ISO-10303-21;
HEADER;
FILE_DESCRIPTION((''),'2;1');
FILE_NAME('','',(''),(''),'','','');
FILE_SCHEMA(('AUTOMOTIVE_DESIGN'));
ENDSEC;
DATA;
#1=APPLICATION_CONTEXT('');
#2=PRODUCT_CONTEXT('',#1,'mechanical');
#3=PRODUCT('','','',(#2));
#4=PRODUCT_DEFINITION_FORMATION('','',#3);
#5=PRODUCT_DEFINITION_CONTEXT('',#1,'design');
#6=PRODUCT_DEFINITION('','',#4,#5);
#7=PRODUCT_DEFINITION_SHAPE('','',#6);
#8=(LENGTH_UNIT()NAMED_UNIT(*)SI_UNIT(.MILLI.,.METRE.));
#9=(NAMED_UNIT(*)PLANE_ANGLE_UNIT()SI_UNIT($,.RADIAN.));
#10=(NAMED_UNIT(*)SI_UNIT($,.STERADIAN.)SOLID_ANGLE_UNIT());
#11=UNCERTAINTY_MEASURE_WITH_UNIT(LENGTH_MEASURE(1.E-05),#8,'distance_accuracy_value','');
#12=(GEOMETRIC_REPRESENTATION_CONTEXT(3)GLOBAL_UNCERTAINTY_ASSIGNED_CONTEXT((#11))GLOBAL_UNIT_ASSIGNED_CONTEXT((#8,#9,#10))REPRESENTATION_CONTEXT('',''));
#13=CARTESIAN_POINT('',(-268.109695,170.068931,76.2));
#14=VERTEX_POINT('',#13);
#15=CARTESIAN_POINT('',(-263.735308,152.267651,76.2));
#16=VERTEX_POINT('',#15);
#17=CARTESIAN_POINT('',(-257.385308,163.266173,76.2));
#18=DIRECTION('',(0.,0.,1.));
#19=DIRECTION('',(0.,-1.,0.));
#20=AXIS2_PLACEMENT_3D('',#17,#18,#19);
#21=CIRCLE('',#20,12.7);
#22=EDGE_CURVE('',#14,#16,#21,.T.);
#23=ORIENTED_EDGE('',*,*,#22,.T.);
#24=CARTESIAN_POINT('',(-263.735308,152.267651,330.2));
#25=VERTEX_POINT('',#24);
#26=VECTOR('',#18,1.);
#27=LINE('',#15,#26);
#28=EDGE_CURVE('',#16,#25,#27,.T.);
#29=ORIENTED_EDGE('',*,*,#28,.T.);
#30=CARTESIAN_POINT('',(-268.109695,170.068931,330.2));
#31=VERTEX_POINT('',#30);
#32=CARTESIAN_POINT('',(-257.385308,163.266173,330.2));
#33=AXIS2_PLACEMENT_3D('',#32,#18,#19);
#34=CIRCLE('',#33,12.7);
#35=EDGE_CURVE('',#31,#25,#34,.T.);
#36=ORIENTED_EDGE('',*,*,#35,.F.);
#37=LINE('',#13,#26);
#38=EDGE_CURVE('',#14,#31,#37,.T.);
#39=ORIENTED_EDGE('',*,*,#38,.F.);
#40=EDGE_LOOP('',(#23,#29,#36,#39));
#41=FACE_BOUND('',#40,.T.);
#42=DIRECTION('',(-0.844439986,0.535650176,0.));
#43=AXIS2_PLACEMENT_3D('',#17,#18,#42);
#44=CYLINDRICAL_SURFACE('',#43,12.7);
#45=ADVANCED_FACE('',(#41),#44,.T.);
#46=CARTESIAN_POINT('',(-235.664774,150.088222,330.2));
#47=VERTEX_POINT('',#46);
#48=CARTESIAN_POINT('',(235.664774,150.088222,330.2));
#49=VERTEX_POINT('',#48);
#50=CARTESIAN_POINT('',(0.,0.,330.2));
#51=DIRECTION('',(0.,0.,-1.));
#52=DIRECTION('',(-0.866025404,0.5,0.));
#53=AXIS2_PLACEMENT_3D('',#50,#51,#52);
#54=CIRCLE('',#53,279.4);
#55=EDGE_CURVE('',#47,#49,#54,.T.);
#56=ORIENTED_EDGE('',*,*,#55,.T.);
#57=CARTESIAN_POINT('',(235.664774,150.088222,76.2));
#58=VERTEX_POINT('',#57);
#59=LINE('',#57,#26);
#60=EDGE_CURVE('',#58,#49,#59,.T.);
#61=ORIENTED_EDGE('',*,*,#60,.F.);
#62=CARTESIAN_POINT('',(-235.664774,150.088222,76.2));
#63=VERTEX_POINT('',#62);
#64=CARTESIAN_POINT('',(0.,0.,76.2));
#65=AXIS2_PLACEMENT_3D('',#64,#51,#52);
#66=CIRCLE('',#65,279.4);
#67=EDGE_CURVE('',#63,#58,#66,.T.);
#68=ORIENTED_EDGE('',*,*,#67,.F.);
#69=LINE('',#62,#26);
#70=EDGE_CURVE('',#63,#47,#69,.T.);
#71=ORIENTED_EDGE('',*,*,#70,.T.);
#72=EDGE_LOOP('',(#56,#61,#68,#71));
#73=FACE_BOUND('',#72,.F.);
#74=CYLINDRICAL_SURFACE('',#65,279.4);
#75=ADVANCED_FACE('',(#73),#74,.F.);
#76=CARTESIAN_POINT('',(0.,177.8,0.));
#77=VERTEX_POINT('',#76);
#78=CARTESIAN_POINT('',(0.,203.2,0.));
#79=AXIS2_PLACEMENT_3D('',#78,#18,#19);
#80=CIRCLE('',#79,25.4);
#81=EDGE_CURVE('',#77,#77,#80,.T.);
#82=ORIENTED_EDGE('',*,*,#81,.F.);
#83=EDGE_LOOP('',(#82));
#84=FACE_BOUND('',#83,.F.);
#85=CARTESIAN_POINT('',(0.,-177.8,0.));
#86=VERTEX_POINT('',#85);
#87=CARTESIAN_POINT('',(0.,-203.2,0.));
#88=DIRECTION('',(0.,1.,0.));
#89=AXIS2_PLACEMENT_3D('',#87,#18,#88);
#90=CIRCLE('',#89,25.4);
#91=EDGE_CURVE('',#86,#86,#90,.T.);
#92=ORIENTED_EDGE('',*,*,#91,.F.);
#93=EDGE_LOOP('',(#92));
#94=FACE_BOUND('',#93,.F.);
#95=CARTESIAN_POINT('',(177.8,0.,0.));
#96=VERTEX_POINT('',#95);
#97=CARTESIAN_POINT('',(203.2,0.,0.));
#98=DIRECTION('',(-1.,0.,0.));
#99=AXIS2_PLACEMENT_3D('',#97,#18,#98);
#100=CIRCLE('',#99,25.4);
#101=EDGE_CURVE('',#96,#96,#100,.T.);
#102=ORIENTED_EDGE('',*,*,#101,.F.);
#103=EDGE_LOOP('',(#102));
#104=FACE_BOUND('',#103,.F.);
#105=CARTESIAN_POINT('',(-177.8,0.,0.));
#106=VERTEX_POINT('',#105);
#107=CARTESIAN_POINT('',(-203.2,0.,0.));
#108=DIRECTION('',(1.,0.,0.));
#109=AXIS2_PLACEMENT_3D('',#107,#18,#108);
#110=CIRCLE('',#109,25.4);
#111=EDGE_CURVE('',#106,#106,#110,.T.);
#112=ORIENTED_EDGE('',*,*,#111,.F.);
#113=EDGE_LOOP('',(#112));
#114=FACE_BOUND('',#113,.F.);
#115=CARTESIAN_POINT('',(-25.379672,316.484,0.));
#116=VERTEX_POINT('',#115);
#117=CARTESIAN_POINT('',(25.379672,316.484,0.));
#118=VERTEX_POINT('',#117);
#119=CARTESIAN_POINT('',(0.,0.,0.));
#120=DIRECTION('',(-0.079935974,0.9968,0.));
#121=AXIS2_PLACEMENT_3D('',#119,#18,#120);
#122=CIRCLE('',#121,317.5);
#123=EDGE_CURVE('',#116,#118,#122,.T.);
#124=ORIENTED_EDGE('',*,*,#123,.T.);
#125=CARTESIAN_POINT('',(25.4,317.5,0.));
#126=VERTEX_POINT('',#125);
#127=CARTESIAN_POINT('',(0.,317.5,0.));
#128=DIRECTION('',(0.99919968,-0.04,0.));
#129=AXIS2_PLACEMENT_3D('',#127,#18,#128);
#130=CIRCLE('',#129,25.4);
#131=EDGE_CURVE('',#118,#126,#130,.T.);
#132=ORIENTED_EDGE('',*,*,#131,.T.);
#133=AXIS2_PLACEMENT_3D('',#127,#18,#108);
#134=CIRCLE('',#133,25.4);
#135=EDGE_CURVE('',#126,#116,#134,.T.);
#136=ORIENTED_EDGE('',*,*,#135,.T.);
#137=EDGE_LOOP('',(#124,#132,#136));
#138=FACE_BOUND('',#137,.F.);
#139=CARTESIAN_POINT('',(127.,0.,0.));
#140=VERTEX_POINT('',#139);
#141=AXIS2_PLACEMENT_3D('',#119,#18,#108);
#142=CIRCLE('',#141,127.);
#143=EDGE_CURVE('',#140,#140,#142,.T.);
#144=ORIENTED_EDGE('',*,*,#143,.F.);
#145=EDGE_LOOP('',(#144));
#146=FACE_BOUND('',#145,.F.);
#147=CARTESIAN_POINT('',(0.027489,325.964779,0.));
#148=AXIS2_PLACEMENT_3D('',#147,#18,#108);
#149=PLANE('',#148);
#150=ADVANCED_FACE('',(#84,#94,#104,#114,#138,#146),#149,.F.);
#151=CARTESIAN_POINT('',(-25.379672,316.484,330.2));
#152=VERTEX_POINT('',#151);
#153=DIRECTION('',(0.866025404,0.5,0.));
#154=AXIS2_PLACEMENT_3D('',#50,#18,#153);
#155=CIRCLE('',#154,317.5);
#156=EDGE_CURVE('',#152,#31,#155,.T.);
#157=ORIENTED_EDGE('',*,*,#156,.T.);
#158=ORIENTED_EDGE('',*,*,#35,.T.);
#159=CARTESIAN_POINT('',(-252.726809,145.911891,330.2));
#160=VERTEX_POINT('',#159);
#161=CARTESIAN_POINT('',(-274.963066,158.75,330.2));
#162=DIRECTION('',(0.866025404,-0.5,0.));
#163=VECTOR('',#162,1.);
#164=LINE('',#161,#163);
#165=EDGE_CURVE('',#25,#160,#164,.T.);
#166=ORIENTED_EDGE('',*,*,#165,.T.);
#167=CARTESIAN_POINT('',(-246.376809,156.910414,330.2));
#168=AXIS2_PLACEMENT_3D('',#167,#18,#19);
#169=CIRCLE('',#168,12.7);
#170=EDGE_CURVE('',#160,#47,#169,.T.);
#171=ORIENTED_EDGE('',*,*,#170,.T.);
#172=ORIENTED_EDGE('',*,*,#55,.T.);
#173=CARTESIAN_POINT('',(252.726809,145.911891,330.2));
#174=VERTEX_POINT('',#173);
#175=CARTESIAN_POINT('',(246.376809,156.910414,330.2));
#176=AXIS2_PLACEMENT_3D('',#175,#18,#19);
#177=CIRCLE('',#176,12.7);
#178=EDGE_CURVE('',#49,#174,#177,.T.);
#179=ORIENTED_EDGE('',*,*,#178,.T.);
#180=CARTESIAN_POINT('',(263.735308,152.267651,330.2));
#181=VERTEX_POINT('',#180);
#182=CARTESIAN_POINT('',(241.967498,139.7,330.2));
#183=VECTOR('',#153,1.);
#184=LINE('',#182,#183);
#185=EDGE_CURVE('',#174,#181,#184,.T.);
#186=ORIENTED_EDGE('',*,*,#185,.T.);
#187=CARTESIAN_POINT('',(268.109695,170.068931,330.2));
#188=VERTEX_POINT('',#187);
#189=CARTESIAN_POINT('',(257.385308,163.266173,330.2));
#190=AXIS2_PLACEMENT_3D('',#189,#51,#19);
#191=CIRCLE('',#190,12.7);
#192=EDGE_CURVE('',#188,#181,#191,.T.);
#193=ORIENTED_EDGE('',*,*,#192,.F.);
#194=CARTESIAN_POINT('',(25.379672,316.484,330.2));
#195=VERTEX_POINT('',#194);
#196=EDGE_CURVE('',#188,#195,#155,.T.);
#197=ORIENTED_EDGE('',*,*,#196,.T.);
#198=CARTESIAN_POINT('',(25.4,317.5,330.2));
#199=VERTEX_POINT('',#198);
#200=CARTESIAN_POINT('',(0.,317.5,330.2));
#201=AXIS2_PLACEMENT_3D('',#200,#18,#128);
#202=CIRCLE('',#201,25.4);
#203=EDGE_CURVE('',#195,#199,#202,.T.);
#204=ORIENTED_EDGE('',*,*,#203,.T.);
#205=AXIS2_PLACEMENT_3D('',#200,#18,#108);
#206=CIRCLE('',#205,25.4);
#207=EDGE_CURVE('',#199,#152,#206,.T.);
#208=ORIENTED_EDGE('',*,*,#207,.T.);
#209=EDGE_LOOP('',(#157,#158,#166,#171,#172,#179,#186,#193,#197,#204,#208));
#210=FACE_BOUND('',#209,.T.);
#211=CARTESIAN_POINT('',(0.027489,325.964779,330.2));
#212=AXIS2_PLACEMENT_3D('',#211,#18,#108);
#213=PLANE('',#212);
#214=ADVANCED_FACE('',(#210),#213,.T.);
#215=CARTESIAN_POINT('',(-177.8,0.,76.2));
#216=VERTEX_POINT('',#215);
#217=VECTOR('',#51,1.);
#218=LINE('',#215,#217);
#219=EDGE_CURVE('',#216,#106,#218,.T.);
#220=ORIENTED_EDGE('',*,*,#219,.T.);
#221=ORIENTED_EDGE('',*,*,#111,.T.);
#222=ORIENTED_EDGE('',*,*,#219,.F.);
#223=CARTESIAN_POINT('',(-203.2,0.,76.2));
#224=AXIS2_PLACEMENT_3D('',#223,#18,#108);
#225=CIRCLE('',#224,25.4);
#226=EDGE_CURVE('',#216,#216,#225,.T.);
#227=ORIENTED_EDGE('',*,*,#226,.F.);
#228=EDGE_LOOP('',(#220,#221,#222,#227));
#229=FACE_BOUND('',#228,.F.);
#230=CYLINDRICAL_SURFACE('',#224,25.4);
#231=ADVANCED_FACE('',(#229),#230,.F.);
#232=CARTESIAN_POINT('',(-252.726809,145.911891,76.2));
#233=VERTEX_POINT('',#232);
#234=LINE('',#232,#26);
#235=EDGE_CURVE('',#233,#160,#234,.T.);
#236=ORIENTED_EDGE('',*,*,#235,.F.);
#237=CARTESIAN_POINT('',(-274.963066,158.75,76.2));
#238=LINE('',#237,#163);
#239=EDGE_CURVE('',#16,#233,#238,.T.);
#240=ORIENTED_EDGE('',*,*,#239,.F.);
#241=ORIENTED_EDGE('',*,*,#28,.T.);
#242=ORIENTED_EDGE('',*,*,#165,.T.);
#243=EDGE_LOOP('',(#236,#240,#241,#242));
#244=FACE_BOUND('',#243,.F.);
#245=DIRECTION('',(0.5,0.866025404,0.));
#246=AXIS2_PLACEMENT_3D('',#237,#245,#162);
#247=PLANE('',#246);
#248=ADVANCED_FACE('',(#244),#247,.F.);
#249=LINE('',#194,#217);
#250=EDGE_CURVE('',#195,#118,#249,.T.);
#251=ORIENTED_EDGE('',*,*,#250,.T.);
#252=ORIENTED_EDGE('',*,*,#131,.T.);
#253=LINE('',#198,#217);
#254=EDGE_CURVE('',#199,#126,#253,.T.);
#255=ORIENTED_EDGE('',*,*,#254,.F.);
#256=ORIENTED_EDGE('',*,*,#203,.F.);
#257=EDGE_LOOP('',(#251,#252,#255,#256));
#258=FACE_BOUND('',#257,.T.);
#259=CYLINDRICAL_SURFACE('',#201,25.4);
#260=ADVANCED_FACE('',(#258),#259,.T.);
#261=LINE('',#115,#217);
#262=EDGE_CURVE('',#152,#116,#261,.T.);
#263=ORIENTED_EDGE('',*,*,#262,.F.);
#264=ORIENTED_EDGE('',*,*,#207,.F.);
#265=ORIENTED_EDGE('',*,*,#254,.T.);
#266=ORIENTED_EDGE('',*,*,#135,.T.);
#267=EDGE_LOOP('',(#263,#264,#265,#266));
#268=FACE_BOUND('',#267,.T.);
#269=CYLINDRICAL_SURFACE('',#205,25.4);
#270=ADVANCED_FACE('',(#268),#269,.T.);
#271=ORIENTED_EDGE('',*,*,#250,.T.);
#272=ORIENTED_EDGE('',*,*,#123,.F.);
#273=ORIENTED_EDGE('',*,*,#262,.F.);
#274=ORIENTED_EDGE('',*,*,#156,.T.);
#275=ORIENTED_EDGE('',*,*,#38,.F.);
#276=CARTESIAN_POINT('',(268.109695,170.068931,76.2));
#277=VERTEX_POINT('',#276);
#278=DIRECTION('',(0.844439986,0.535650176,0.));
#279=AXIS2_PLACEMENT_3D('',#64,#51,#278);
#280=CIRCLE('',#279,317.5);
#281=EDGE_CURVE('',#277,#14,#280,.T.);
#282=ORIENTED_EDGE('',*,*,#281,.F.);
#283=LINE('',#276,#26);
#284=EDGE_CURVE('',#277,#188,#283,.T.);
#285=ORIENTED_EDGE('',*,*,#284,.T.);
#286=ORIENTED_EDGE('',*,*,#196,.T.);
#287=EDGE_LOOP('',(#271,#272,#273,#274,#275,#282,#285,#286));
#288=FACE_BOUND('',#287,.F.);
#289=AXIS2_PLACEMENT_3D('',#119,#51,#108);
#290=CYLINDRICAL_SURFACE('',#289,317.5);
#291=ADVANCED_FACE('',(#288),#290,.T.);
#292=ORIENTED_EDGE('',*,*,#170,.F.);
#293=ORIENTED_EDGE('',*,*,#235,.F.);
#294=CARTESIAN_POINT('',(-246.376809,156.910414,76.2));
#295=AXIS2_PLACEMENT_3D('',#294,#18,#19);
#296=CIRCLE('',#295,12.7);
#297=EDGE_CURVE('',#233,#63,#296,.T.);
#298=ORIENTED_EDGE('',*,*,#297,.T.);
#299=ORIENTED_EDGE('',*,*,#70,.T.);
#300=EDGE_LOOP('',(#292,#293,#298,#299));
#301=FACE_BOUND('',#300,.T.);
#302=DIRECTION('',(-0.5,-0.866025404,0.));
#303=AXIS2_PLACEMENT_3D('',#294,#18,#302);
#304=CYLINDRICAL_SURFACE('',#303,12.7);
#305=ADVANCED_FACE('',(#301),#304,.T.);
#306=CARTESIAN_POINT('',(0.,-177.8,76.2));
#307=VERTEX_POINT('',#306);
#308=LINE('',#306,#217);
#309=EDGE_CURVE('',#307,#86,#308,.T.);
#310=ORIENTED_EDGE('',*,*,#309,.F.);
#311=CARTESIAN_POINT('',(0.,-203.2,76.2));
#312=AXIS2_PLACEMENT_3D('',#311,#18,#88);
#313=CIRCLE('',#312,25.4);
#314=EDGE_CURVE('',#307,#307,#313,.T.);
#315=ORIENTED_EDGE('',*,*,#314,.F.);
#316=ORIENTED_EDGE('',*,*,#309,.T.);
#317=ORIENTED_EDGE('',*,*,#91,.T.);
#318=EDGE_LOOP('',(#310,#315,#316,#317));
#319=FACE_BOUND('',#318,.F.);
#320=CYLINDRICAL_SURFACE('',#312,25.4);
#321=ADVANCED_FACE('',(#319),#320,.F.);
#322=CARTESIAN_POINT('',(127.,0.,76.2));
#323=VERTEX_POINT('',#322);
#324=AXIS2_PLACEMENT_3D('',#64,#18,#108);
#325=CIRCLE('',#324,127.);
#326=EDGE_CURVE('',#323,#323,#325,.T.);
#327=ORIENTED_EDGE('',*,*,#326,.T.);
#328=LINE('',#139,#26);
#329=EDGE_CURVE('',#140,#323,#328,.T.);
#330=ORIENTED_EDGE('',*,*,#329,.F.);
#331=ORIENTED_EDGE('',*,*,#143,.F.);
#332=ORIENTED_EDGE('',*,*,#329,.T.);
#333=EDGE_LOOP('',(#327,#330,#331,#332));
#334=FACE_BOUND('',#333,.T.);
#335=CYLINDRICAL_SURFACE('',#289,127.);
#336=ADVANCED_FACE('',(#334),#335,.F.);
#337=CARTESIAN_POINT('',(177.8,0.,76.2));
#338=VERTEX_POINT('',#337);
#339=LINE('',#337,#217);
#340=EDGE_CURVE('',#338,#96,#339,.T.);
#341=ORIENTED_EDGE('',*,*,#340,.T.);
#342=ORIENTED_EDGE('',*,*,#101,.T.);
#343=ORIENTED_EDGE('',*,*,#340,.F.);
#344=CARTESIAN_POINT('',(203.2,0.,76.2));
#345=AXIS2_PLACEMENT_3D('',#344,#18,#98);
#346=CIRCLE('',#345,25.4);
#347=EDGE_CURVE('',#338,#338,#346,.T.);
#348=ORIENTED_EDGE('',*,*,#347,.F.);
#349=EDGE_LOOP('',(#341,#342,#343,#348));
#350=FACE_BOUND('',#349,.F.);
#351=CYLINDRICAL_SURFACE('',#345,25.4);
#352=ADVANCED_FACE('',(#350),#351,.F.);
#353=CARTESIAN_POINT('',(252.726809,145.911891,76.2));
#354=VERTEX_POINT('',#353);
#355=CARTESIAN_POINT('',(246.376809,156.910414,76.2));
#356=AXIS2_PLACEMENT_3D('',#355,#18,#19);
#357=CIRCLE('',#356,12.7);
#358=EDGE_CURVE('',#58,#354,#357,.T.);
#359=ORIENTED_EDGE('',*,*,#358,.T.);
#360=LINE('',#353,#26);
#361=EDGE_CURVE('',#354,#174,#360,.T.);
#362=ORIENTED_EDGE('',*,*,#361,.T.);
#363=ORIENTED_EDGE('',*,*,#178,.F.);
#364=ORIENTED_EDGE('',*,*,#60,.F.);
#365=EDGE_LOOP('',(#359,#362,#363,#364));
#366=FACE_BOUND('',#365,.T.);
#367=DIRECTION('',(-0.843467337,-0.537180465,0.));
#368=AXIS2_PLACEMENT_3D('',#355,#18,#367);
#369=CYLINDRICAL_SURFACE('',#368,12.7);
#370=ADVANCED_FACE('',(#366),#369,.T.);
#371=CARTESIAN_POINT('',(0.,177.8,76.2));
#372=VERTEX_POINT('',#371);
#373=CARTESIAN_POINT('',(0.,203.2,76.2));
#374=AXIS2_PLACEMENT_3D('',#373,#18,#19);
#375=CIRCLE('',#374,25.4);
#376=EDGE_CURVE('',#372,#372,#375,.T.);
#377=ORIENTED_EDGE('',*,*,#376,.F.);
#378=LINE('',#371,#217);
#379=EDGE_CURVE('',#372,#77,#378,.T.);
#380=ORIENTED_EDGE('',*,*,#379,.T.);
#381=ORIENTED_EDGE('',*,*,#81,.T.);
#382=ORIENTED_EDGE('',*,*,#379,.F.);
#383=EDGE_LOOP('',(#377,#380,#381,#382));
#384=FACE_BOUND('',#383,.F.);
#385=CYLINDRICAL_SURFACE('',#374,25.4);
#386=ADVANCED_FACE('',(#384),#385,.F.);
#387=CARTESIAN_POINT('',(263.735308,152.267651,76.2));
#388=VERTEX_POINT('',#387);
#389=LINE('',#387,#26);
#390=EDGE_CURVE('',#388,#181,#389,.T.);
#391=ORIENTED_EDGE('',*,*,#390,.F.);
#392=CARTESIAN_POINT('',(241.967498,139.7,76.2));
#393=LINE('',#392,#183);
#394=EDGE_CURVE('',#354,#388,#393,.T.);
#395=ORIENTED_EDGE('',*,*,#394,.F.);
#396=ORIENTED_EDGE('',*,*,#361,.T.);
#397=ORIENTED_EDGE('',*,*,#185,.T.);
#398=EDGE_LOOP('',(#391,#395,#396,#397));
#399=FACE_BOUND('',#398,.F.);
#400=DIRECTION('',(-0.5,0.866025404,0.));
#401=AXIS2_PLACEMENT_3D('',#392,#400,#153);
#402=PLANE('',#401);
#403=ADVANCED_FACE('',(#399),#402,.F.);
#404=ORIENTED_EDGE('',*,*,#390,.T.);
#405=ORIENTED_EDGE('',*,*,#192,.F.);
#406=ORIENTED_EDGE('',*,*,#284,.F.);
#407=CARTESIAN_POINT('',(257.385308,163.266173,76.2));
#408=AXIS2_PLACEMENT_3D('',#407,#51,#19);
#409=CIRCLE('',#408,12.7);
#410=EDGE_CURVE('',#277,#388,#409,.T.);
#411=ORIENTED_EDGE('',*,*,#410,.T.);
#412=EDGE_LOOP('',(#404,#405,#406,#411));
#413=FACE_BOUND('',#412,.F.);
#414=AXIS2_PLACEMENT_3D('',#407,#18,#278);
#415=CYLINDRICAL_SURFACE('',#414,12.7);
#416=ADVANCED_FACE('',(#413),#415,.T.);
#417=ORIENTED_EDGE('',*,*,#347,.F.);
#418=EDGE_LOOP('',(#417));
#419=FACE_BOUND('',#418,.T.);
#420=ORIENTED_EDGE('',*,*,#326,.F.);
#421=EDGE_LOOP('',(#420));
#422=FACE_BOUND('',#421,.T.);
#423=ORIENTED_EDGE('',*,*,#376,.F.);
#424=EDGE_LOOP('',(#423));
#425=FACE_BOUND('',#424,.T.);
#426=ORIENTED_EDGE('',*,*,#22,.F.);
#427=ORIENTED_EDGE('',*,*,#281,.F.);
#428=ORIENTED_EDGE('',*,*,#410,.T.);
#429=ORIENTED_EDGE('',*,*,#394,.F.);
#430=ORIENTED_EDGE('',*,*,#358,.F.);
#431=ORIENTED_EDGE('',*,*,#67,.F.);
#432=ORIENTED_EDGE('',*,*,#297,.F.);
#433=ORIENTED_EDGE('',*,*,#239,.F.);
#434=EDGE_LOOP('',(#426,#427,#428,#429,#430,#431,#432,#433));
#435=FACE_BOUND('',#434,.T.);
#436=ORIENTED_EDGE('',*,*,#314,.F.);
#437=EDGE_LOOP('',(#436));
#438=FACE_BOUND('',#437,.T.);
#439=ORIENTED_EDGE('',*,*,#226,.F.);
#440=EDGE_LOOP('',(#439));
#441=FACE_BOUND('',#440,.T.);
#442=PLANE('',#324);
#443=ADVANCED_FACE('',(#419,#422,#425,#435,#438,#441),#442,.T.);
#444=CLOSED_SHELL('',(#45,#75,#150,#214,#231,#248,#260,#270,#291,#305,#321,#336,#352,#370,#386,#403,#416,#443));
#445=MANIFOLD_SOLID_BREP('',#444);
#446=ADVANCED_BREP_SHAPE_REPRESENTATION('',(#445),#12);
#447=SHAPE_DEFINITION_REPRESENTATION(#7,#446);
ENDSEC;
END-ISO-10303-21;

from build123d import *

# Parameters (mm, degrees)
F0_R            = 317.5
F0_R_2          = 127
F1_DEPTH        = 76.2
F3_DEPTH        = 254
F4_R            = 12.7
F6_DEPTH        = 330.2
F7_R            = 25.4
F8_DEPTH        = 76.201
F8_COPIES_COUNT = 4


# Not quite as in the source:
# - a pattern or mirror of a feature is missing from the dataset's text; its kind, count and spacing are read off the source's solid


with BuildPart() as f1:
    # F0 (on Top) → F1 (new body)
    with BuildSketch(Plane.XY):
        Circle(F0_R)
        Circle(F0_R_2, mode=Mode.SUBTRACT)
    extrude(amount=F1_DEPTH)

    # F2 (on face) → F3 (join)
    with BuildSketch(Plane.XY.offset(76.2)):
        with BuildLine():
            ThreePointArc((-241.9674978174, 139.7), (0, 279.4), (241.9674978174, 139.7))
            Line((241.9674978174, 139.7), (274.9630657016, 158.75))
            ThreePointArc((274.9630657016, 158.75), (0, 317.5), (-274.9630657016, 158.75))
            Line((-274.9630657016, 158.75), (-241.9674978174, 139.7))
        make_face()
    extrude(amount=F3_DEPTH)

    # F4
    f4_edges = [f1.edges().sort_by_distance(p)[0] for p in [
        (-274.963066, 158.75, 203.2),
        (-241.967498, 139.7, 203.2),
        (241.967498, 139.7, 203.2),
        (274.963066, 158.75, 203.2),
    ]]
    fillet(f4_edges, radius=F4_R)

    # F5 (on face) → F6 (join, through all)
    with BuildSketch(Plane.XY.offset(330.2)):
        with BuildLine():
            ThreePointArc((25.3796718655, 316.484), (25.3949174579, 316.9918983288), (25.4, 317.5))
            ThreePointArc((25.4, 317.5), (-0.5081016712, 342.8949174579), (-25.3796718655, 316.484))
            ThreePointArc((-25.3796718655, 316.484), (0, 317.5), (25.3796718655, 316.484))
        make_face()
        with BuildLine():
            ThreePointArc((25.3796718655, 316.484), (0, 317.5), (-25.3796718655, 316.484))
            ThreePointArc((-25.3796718655, 316.484), (0, 292.1), (25.3796718655, 316.484))
        make_face()
    extrude(amount=-F6_DEPTH)

    # F7 (on face) → F8 (cut, through all)
    with BuildSketch(Plane.XY.offset(76.2)):
        with Locations((-203.2, 0)):
            Circle(F7_R)
    f8 = extrude(amount=-F8_DEPTH, mode=Mode.SUBTRACT)

    # F8_copies: F8 ×4 about axis
    f8_copies_axis = Axis((0, 0, 0), (0, 0, 1))
    for i in range(1, F8_COPIES_COUNT):
        add(f8.rotate(f8_copies_axis, i * 360 / F8_COPIES_COUNT), mode=Mode.SUBTRACT)


solid = f1.part
